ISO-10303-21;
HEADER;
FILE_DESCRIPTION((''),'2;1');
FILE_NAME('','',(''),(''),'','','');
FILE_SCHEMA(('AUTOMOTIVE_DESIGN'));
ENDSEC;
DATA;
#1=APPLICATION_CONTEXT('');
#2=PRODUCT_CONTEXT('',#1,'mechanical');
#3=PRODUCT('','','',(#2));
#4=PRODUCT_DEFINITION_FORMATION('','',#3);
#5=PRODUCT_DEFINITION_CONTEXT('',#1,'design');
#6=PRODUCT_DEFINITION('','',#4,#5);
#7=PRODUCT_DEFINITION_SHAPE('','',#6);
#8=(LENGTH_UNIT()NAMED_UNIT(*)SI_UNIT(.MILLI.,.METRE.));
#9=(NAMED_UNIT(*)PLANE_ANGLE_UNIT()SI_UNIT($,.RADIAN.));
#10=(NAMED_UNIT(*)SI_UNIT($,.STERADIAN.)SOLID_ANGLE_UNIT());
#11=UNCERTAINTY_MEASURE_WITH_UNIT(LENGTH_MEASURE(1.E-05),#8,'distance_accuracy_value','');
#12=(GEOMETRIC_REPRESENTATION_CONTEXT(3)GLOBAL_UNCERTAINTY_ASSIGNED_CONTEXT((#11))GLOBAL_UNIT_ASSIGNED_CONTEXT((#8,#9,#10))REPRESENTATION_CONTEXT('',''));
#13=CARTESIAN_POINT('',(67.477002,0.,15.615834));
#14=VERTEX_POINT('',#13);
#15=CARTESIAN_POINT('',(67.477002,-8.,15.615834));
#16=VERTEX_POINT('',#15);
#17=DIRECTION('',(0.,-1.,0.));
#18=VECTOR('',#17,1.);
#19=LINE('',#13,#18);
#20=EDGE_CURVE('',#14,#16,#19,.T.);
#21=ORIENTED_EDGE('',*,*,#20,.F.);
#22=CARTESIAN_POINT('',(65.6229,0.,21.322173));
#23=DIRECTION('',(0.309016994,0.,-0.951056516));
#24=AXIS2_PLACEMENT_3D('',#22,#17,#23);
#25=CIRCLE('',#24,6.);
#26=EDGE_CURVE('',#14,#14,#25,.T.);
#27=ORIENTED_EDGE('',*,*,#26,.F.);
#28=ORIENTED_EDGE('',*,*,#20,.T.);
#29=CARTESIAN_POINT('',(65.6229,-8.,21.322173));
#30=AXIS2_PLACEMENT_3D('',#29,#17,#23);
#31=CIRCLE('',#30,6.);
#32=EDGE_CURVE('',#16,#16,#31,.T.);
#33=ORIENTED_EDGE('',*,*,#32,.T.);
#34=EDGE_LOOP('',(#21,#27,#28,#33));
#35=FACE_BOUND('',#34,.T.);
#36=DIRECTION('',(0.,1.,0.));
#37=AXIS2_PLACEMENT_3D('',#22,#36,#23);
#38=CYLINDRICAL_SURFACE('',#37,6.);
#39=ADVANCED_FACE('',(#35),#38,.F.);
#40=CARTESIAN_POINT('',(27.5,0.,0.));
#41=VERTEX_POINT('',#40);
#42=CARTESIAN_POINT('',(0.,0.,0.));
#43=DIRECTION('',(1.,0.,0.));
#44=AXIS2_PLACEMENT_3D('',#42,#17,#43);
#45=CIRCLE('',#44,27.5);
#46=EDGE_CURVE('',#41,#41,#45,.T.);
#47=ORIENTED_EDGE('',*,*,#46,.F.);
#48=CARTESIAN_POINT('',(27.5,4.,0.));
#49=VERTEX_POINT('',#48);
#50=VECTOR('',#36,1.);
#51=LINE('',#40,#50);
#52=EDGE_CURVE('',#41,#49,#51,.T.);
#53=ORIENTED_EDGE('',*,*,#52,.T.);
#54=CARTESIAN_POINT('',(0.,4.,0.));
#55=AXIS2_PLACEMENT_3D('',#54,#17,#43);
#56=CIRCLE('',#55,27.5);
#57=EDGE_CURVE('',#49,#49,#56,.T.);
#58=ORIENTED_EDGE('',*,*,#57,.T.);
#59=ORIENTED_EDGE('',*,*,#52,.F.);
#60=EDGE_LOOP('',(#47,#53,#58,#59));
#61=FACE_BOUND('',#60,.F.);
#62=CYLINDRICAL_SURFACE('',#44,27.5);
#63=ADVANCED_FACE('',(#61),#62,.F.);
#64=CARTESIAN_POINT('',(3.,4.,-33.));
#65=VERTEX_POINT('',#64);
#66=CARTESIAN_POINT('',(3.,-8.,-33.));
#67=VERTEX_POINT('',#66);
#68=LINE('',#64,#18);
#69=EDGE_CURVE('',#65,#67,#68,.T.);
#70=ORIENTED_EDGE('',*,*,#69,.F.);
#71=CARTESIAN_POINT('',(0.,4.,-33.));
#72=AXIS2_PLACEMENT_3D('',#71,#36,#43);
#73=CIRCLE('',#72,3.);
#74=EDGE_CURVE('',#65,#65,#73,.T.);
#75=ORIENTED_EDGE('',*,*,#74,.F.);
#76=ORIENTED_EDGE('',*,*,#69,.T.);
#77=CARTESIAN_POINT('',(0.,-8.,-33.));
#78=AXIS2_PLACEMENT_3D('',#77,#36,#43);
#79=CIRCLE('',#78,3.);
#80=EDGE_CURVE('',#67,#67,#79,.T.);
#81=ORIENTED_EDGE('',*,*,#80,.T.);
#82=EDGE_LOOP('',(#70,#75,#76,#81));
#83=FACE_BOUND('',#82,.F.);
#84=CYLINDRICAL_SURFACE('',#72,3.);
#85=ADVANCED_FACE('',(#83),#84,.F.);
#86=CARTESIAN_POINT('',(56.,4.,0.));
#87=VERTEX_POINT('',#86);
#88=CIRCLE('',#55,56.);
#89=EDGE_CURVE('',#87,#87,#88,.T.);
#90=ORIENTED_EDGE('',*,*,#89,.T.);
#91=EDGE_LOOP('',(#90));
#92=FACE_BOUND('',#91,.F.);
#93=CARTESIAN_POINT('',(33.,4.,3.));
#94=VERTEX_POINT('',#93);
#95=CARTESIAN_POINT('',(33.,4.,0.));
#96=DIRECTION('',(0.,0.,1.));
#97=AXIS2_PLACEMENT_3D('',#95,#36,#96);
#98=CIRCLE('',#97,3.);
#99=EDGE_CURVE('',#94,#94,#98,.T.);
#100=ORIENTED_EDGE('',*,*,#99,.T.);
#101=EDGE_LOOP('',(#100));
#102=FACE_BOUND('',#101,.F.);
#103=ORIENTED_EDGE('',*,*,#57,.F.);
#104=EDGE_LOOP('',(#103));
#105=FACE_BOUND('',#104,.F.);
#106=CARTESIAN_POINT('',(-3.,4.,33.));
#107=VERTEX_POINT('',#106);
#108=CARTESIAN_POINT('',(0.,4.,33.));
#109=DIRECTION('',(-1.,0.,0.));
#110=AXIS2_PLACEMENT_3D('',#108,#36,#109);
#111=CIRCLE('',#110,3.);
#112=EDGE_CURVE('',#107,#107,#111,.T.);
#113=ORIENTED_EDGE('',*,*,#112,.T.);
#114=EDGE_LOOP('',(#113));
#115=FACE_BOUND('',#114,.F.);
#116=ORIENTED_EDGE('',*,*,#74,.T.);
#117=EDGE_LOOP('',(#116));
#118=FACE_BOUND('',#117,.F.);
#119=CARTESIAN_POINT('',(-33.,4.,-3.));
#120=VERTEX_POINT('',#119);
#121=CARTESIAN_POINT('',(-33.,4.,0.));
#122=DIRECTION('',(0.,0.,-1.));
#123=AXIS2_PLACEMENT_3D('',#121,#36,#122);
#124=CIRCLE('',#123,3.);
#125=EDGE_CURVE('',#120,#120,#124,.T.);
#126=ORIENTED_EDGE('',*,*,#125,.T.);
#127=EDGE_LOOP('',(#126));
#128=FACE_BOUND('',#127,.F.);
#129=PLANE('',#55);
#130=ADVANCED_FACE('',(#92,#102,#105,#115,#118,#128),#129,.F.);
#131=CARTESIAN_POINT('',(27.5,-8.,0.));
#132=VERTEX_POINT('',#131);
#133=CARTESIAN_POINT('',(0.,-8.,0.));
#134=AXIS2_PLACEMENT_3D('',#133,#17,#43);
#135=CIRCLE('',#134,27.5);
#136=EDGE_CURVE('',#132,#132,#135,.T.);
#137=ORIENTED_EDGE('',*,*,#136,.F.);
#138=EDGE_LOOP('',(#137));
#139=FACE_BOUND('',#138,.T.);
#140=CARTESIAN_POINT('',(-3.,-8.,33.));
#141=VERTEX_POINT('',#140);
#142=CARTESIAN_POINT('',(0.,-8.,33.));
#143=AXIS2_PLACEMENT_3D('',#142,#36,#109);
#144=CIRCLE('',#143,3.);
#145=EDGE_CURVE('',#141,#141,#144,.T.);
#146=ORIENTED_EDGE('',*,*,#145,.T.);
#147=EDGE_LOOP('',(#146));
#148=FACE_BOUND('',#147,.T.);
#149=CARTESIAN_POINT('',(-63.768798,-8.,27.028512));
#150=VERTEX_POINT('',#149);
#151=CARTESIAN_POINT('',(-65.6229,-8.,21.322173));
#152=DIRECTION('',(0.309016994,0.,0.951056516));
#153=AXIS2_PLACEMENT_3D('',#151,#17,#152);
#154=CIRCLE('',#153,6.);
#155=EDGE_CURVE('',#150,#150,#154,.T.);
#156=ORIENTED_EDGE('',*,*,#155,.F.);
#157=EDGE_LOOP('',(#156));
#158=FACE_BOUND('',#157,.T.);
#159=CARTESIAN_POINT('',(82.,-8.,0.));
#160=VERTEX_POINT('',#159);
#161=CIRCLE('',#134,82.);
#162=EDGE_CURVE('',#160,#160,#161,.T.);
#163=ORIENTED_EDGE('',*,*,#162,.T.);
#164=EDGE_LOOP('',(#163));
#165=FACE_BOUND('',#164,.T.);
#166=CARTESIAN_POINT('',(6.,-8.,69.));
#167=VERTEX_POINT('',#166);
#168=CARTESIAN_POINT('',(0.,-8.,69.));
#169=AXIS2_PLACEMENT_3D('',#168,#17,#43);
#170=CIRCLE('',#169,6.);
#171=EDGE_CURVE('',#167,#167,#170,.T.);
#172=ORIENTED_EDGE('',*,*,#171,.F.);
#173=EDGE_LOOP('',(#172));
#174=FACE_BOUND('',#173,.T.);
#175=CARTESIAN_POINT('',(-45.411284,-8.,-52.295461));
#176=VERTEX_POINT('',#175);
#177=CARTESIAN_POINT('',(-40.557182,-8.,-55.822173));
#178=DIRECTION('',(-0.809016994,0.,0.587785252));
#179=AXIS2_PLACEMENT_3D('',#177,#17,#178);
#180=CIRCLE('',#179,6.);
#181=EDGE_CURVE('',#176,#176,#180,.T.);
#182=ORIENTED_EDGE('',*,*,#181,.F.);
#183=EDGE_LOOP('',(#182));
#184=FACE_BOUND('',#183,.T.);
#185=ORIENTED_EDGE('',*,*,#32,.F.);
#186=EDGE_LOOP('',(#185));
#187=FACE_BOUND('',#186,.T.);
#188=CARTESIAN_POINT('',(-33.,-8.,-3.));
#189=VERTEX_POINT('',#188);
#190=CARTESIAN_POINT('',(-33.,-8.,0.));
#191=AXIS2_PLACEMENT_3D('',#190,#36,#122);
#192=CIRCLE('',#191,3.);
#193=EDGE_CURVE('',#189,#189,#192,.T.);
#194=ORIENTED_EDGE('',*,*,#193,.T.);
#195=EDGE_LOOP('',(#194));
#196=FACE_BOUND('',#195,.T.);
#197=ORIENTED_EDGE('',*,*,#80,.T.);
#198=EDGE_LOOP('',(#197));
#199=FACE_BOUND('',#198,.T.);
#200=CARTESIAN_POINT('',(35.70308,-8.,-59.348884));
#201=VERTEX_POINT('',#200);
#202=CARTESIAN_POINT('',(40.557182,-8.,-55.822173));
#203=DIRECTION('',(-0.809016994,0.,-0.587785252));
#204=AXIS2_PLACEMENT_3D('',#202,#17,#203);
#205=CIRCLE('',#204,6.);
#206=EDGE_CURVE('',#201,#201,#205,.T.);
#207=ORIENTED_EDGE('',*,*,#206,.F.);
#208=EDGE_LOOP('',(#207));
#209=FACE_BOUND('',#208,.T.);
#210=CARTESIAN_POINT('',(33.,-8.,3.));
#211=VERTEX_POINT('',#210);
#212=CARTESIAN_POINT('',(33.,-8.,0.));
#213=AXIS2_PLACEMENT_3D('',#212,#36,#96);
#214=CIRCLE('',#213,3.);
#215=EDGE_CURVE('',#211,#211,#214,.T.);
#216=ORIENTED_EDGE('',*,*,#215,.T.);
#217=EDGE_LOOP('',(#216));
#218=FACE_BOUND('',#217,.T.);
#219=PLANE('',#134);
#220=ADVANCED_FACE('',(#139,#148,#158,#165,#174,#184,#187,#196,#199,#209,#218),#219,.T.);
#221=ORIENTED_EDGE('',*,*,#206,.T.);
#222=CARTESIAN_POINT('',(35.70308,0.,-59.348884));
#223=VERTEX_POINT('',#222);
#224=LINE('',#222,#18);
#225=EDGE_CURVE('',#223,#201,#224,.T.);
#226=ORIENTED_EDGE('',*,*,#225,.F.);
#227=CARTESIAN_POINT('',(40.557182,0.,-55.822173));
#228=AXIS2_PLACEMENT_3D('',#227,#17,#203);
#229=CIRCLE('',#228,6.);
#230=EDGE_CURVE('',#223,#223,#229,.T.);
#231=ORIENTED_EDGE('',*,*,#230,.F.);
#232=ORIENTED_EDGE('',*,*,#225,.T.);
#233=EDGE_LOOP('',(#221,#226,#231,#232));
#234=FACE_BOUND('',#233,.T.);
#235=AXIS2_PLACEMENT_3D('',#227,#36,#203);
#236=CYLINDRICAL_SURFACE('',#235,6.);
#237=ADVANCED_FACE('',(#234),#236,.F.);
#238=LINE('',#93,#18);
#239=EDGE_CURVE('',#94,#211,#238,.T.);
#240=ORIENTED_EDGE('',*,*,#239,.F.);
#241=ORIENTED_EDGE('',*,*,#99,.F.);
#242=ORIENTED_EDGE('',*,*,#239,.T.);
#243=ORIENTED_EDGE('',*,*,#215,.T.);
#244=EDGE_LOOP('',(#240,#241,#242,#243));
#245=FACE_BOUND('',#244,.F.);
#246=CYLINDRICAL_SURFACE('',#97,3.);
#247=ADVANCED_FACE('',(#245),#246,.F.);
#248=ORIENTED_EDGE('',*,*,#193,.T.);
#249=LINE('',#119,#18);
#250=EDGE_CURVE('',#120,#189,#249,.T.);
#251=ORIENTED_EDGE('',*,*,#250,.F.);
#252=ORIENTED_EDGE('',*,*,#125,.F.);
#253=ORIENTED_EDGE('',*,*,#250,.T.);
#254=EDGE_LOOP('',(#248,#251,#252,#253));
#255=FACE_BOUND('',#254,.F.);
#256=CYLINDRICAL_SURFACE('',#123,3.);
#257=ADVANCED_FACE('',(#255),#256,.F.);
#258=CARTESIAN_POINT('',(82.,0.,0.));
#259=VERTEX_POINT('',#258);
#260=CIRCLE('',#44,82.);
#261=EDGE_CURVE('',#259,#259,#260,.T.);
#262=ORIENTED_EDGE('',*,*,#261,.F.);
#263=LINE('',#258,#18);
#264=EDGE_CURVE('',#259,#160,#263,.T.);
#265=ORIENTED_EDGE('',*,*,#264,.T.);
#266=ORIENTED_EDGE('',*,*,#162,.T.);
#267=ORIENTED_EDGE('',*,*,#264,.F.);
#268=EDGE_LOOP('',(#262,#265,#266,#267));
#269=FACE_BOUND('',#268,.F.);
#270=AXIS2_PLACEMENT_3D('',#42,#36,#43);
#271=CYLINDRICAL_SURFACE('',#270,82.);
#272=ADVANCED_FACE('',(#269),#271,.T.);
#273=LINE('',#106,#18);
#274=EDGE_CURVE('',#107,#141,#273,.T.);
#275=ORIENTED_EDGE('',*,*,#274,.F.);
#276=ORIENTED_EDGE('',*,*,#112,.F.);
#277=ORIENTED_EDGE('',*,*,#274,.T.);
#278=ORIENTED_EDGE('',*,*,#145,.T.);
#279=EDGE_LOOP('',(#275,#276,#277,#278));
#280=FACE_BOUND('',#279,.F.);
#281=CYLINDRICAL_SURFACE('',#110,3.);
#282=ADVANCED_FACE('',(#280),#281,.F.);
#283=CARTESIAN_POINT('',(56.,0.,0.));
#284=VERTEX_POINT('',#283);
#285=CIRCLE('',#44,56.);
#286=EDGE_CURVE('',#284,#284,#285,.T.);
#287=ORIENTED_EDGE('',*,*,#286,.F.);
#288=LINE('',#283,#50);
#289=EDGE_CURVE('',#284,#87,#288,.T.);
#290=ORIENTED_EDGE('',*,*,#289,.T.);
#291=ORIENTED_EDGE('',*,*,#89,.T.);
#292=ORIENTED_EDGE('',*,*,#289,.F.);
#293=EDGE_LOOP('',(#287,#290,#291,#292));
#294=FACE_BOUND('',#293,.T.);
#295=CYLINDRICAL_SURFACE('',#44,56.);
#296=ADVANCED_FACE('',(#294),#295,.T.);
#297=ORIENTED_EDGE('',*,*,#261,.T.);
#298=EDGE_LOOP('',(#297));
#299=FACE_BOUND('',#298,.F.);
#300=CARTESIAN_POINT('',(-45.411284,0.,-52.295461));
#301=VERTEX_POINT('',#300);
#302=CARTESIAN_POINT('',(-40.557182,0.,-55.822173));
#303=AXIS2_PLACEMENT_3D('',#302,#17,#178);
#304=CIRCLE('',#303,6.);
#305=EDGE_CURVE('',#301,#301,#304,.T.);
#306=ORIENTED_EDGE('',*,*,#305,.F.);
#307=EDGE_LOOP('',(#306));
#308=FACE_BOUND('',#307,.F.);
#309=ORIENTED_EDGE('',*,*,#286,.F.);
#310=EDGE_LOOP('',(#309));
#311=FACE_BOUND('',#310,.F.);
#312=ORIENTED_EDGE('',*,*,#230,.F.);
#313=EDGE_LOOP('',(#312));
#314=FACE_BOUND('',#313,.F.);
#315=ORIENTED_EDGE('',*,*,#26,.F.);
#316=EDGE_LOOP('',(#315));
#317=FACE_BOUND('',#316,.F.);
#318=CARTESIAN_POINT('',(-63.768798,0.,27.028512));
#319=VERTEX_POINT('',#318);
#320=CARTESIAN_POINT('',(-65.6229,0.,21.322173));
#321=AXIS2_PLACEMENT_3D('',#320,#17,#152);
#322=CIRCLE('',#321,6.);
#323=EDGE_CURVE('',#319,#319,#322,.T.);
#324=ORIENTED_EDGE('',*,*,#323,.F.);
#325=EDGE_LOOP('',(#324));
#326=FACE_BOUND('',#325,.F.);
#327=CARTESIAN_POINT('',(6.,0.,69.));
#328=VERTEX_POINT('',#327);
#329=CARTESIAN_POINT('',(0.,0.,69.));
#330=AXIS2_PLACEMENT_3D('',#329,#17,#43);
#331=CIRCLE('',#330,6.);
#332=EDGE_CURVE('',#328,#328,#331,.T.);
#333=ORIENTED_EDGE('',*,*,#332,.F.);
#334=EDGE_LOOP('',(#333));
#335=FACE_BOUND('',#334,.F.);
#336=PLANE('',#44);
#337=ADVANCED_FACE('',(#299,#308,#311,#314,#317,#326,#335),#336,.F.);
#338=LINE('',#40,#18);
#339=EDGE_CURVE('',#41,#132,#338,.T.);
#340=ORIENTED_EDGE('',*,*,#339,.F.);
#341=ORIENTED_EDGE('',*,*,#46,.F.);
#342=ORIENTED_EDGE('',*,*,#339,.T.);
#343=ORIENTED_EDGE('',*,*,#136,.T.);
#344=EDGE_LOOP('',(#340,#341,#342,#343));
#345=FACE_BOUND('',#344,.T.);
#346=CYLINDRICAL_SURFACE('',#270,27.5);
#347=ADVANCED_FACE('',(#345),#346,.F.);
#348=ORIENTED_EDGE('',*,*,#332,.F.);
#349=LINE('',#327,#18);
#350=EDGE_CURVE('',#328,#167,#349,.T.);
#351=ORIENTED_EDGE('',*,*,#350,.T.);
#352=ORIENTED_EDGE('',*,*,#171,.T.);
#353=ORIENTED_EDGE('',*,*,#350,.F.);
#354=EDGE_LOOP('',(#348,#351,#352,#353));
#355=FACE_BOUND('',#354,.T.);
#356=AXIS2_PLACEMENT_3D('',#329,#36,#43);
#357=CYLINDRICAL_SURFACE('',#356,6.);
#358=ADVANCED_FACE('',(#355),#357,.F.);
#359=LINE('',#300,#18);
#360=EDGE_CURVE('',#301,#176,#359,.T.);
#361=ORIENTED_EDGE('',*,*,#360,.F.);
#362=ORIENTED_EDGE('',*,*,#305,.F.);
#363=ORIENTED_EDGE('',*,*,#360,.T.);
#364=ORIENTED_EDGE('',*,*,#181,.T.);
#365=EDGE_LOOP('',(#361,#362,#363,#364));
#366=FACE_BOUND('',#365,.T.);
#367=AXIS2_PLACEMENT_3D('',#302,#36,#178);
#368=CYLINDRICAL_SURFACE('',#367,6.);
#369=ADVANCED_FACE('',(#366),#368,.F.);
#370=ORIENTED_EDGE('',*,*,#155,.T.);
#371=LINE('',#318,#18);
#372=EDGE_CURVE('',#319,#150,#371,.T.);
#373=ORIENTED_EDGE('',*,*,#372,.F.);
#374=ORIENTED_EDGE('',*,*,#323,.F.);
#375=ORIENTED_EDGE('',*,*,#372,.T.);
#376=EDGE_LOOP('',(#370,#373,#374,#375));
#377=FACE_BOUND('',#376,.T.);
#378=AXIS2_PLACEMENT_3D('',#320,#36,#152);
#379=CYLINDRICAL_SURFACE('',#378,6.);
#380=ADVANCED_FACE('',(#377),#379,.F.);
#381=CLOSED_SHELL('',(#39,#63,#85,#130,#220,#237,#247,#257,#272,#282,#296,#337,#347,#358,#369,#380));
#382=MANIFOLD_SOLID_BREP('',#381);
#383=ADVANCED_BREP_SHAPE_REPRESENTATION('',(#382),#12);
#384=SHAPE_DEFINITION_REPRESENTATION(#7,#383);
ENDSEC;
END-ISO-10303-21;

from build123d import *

# Parameters (mm, degrees)
F0_R            = 82
F0_R_2          = 56
F0_R_3          = 6
F0_R_4          = 27.5
F0_R_5          = 3
F1_DEPTH        = 8
F2_DEPTH        = 4
F3_DEPTH        = 8
F3_COPIES_COUNT = 5
F4_R            = 3
F5_DEPTH        = 12
F5_COPIES_COUNT = 4


# Not quite as in the source:
# - a pattern or mirror of a feature is missing from the dataset's text; its kind, count and spacing are read off the source's solid


with BuildPart() as f1:
    # F0 (on Front) → F1 (new body)
    with BuildSketch(Plane.XZ):
        Circle(F0_R)
        Circle(F0_R_2, mode=Mode.SUBTRACT)
        with Locations((0, 69)):
            Circle(F0_R_3, mode=Mode.SUBTRACT)
        Circle(F0_R_2)
        Circle(F0_R_4, mode=Mode.SUBTRACT)
        with Locations((0, 33)):
            Circle(F0_R_5, mode=Mode.SUBTRACT)
        with Locations((0, 69)):
            Circle(F0_R_3)
        with Locations((0, 33)):
            Circle(F0_R_5)
    extrude(amount=F1_DEPTH)

    # F0 (on Front) → F2 (join)
    with BuildSketch(Plane.XZ):
        Circle(F0_R_2)
        Circle(F0_R_4, mode=Mode.SUBTRACT)
        with Locations((0, 33)):
            Circle(F0_R_5, mode=Mode.SUBTRACT)
        with Locations((0, 33)):
            Circle(F0_R_5)
    extrude(amount=-F2_DEPTH)

    # F0 (on Front) → F3 (cut)
    with BuildSketch(Plane.XZ):
        with Locations((0, 69)):
            Circle(F0_R_3)
    f3 = extrude(amount=F3_DEPTH, mode=Mode.SUBTRACT)

    # F3_copies: F3 ×5 about axis
    f3_copies_axis = Axis((0, 0, 0), (0, 1, 0))
    for i in range(1, F3_COPIES_COUNT):
        add(f3.rotate(f3_copies_axis, i * 360 / F3_COPIES_COUNT), mode=Mode.SUBTRACT)

    # F4 (on face) → F5 (cut)
    with BuildSketch(Plane(origin=(0, 4, 0), x_dir=(-1, 0, 0), z_dir=(0, 1, 0))):
        with Locations((0, 33)):
            Circle(F4_R)
    f5 = extrude(amount=-F5_DEPTH, mode=Mode.SUBTRACT)

    # F5_copies: F5 ×4 about axis
    f5_copies_axis = Axis((0, 0, 0), (0, 1, 0))
    for i in range(1, F5_COPIES_COUNT):
        add(f5.rotate(f5_copies_axis, i * 360 / F5_COPIES_COUNT), mode=Mode.SUBTRACT)


solid = f1.part
